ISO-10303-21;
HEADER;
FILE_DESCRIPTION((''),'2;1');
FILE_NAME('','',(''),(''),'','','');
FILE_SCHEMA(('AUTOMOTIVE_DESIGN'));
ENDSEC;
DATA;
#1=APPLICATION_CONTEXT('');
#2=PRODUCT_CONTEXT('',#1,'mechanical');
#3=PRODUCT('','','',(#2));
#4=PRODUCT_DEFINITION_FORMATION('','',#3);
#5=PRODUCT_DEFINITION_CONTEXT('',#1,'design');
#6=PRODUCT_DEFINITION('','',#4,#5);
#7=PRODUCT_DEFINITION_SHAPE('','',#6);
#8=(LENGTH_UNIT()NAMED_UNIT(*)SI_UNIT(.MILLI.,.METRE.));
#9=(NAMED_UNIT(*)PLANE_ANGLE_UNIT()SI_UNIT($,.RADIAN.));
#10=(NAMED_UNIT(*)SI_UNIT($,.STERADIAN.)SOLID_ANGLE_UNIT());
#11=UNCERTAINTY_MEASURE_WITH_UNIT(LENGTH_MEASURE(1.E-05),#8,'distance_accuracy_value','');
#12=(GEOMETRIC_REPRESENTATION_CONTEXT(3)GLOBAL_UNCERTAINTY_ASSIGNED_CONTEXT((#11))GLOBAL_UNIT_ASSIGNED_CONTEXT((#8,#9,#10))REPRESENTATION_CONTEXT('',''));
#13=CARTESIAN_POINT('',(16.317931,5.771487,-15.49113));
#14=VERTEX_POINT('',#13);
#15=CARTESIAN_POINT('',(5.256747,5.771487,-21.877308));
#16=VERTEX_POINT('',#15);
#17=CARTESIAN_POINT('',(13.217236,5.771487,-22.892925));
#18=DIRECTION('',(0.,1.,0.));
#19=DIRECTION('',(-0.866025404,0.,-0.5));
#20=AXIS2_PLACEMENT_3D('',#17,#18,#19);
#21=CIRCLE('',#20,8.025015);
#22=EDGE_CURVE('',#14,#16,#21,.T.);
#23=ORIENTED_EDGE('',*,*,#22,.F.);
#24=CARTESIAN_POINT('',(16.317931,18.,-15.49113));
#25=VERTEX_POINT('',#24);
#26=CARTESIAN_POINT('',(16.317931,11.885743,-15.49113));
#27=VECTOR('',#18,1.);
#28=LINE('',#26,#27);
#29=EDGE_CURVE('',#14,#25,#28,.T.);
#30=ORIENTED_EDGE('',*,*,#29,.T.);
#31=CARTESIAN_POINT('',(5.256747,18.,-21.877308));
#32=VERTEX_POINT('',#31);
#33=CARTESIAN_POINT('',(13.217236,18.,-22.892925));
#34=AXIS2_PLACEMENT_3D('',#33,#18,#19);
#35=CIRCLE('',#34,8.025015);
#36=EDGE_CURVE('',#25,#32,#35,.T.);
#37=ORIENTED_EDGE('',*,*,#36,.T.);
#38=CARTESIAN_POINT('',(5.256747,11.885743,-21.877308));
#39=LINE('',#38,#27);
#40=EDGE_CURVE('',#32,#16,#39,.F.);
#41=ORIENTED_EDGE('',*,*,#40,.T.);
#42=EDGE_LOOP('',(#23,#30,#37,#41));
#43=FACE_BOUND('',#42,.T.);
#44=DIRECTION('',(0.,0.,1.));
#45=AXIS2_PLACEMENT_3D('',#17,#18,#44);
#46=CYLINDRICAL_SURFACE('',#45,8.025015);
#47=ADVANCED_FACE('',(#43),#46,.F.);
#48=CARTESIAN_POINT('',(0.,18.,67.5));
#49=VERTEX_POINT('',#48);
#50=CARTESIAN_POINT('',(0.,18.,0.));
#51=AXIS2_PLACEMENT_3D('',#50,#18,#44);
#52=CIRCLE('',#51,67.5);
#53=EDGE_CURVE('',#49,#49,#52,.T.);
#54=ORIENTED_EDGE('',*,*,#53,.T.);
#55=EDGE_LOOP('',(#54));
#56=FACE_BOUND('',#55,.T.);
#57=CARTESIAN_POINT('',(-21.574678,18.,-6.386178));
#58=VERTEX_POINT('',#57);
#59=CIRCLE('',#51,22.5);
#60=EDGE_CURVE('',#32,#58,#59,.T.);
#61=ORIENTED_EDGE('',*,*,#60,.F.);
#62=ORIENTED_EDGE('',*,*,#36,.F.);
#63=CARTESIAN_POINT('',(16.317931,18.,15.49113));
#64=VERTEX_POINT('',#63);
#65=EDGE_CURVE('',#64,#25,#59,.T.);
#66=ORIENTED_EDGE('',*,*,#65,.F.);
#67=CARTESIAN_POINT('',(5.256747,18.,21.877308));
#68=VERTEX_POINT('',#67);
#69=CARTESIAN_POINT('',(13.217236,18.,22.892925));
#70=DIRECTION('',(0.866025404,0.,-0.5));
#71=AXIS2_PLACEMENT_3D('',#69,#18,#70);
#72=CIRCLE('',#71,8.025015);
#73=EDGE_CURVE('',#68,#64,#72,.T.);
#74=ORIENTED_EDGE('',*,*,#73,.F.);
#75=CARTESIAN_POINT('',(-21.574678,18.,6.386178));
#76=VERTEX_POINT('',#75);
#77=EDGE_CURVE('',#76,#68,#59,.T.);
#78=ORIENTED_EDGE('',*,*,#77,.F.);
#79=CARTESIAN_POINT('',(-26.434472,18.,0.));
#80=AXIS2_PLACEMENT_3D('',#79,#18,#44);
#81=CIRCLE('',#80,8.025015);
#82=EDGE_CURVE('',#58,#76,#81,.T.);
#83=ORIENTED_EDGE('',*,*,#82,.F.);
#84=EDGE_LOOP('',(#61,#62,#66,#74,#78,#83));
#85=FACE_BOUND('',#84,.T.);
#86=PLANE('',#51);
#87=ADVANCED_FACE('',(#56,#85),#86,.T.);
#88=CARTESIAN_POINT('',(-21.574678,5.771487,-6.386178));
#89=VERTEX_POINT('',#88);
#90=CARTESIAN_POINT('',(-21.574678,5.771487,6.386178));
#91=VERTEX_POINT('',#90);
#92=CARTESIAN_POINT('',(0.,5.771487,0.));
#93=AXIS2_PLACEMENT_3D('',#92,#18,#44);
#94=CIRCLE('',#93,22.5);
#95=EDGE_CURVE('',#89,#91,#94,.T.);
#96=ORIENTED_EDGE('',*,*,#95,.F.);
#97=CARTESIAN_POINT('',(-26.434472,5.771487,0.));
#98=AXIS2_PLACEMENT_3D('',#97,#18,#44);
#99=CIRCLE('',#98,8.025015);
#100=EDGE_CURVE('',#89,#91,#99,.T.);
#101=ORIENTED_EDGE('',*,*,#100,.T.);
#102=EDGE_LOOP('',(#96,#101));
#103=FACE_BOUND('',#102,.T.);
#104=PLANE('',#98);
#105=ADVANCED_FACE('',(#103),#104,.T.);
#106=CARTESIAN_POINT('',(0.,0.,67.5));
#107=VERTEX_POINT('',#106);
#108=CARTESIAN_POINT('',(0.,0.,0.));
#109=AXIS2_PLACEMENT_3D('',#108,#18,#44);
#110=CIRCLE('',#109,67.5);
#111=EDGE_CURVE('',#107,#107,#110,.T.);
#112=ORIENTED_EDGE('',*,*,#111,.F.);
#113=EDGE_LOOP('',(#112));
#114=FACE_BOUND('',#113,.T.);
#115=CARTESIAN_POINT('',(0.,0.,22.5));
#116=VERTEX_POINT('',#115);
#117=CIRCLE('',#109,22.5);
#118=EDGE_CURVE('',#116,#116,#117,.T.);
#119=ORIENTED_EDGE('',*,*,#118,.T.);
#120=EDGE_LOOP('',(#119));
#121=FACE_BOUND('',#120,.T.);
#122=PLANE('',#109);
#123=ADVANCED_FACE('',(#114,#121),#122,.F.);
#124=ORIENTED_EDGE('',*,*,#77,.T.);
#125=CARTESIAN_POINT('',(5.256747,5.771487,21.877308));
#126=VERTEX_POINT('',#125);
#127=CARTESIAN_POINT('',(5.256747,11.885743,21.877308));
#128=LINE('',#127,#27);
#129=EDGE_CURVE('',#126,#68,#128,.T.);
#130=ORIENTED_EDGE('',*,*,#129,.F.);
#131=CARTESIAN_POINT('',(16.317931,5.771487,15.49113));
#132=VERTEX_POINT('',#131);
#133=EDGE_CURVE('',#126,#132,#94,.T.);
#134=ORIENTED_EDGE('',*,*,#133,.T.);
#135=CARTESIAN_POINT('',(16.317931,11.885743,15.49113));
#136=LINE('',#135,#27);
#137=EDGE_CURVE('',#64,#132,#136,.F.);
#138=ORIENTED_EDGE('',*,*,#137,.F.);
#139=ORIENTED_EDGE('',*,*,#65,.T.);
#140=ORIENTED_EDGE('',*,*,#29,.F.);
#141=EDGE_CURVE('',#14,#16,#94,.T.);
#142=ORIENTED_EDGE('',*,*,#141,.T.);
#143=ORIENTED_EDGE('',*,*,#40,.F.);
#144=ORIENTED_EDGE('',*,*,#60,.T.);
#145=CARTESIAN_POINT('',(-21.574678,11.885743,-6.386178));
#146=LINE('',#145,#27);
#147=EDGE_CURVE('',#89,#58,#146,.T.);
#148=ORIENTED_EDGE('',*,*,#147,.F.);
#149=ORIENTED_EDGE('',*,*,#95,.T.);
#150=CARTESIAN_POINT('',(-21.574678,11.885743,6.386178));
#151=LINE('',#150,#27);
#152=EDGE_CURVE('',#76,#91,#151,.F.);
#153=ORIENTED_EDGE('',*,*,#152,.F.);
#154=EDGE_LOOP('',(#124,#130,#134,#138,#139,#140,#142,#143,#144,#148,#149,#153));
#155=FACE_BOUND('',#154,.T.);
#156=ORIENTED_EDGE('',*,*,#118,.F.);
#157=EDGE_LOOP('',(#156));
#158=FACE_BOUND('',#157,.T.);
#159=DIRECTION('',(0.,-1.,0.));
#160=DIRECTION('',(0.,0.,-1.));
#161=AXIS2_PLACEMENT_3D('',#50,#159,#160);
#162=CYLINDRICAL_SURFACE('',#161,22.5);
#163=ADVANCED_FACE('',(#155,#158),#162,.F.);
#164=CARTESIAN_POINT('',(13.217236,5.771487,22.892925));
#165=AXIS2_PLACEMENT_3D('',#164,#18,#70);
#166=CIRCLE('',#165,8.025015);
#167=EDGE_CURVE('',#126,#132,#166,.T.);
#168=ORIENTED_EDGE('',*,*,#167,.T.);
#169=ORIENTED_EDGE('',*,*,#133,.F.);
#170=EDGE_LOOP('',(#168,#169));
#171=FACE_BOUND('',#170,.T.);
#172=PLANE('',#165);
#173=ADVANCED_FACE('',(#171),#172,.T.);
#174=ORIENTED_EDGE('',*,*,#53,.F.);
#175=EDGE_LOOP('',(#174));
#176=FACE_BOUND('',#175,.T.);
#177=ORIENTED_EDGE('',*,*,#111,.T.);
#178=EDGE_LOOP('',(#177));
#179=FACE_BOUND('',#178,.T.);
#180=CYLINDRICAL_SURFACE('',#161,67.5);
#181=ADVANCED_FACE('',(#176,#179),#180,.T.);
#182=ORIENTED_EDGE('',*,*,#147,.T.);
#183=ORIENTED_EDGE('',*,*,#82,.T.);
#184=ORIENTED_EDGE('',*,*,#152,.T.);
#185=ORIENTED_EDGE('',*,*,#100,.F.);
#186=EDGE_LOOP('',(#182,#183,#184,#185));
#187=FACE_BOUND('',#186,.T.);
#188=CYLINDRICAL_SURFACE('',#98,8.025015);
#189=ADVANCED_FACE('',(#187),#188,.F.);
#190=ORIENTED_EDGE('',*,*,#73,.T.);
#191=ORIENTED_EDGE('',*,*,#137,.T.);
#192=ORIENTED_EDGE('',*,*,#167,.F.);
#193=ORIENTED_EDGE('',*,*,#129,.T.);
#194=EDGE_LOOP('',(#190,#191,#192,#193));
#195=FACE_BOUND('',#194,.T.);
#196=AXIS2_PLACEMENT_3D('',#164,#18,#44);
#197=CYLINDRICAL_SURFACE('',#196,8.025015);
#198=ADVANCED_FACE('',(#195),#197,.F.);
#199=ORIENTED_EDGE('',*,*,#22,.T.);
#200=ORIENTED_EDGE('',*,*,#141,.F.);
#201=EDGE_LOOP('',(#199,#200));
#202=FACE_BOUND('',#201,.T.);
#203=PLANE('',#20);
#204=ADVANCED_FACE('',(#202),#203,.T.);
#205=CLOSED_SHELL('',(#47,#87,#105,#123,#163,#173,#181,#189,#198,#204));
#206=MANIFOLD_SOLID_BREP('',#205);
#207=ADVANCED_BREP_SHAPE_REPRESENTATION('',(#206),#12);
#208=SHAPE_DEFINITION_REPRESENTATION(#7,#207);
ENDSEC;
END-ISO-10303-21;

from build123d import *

# Parameters (mm, degrees)
SKETCH1_R           = 67.5
BOSS_EXTRUDE1_DEPTH = 18
SKETCH2_R           = 22.5
CUT_EXTRUDE1_DEPTH  = 98.141649152
SKETCH3_R           = 8.025014984
CUT_EXTRUDE2_DEPTH  = 12.228513101
CIRPATTERN1_COUNT   = 3


with BuildPart() as part:
    # Sketch1 → Boss-Extrude1 (new body)
    with BuildSketch(Plane(origin=(0, 0, 0), x_dir=(1, 0, 0), z_dir=(0, 1, 0))):
        Circle(SKETCH1_R)
    extrude(amount=BOSS_EXTRUDE1_DEPTH)

    # Sketch2 → Cut-Extrude1 (cut, through all)
    with BuildSketch(Plane(origin=(0, 0, 0), x_dir=(1, 0, 0), z_dir=(0, 1, 0))):
        Circle(SKETCH2_R)
    extrude(amount=CUT_EXTRUDE1_DEPTH, mode=Mode.SUBTRACT)

    # Sketch3 → Cut-Extrude2 (cut)
    with BuildSketch(Plane(origin=(0, 18, 0), x_dir=(1, 0, 0), z_dir=(0, 1, 0))):
        with Locations((-26.434472352, 0)):
            Circle(SKETCH3_R)
    cut_extrude2 = extrude(amount=-CUT_EXTRUDE2_DEPTH, mode=Mode.SUBTRACT)

    # CirPattern1: Cut-Extrude2 ×3 about axis
    cirpattern1_axis = Axis((0, 0, 0), (0, 1, 0))
    for i in range(1, CIRPATTERN1_COUNT):
        add(cut_extrude2.rotate(cirpattern1_axis, i * 360 / CIRPATTERN1_COUNT), mode=Mode.SUBTRACT)


solid = part.part
